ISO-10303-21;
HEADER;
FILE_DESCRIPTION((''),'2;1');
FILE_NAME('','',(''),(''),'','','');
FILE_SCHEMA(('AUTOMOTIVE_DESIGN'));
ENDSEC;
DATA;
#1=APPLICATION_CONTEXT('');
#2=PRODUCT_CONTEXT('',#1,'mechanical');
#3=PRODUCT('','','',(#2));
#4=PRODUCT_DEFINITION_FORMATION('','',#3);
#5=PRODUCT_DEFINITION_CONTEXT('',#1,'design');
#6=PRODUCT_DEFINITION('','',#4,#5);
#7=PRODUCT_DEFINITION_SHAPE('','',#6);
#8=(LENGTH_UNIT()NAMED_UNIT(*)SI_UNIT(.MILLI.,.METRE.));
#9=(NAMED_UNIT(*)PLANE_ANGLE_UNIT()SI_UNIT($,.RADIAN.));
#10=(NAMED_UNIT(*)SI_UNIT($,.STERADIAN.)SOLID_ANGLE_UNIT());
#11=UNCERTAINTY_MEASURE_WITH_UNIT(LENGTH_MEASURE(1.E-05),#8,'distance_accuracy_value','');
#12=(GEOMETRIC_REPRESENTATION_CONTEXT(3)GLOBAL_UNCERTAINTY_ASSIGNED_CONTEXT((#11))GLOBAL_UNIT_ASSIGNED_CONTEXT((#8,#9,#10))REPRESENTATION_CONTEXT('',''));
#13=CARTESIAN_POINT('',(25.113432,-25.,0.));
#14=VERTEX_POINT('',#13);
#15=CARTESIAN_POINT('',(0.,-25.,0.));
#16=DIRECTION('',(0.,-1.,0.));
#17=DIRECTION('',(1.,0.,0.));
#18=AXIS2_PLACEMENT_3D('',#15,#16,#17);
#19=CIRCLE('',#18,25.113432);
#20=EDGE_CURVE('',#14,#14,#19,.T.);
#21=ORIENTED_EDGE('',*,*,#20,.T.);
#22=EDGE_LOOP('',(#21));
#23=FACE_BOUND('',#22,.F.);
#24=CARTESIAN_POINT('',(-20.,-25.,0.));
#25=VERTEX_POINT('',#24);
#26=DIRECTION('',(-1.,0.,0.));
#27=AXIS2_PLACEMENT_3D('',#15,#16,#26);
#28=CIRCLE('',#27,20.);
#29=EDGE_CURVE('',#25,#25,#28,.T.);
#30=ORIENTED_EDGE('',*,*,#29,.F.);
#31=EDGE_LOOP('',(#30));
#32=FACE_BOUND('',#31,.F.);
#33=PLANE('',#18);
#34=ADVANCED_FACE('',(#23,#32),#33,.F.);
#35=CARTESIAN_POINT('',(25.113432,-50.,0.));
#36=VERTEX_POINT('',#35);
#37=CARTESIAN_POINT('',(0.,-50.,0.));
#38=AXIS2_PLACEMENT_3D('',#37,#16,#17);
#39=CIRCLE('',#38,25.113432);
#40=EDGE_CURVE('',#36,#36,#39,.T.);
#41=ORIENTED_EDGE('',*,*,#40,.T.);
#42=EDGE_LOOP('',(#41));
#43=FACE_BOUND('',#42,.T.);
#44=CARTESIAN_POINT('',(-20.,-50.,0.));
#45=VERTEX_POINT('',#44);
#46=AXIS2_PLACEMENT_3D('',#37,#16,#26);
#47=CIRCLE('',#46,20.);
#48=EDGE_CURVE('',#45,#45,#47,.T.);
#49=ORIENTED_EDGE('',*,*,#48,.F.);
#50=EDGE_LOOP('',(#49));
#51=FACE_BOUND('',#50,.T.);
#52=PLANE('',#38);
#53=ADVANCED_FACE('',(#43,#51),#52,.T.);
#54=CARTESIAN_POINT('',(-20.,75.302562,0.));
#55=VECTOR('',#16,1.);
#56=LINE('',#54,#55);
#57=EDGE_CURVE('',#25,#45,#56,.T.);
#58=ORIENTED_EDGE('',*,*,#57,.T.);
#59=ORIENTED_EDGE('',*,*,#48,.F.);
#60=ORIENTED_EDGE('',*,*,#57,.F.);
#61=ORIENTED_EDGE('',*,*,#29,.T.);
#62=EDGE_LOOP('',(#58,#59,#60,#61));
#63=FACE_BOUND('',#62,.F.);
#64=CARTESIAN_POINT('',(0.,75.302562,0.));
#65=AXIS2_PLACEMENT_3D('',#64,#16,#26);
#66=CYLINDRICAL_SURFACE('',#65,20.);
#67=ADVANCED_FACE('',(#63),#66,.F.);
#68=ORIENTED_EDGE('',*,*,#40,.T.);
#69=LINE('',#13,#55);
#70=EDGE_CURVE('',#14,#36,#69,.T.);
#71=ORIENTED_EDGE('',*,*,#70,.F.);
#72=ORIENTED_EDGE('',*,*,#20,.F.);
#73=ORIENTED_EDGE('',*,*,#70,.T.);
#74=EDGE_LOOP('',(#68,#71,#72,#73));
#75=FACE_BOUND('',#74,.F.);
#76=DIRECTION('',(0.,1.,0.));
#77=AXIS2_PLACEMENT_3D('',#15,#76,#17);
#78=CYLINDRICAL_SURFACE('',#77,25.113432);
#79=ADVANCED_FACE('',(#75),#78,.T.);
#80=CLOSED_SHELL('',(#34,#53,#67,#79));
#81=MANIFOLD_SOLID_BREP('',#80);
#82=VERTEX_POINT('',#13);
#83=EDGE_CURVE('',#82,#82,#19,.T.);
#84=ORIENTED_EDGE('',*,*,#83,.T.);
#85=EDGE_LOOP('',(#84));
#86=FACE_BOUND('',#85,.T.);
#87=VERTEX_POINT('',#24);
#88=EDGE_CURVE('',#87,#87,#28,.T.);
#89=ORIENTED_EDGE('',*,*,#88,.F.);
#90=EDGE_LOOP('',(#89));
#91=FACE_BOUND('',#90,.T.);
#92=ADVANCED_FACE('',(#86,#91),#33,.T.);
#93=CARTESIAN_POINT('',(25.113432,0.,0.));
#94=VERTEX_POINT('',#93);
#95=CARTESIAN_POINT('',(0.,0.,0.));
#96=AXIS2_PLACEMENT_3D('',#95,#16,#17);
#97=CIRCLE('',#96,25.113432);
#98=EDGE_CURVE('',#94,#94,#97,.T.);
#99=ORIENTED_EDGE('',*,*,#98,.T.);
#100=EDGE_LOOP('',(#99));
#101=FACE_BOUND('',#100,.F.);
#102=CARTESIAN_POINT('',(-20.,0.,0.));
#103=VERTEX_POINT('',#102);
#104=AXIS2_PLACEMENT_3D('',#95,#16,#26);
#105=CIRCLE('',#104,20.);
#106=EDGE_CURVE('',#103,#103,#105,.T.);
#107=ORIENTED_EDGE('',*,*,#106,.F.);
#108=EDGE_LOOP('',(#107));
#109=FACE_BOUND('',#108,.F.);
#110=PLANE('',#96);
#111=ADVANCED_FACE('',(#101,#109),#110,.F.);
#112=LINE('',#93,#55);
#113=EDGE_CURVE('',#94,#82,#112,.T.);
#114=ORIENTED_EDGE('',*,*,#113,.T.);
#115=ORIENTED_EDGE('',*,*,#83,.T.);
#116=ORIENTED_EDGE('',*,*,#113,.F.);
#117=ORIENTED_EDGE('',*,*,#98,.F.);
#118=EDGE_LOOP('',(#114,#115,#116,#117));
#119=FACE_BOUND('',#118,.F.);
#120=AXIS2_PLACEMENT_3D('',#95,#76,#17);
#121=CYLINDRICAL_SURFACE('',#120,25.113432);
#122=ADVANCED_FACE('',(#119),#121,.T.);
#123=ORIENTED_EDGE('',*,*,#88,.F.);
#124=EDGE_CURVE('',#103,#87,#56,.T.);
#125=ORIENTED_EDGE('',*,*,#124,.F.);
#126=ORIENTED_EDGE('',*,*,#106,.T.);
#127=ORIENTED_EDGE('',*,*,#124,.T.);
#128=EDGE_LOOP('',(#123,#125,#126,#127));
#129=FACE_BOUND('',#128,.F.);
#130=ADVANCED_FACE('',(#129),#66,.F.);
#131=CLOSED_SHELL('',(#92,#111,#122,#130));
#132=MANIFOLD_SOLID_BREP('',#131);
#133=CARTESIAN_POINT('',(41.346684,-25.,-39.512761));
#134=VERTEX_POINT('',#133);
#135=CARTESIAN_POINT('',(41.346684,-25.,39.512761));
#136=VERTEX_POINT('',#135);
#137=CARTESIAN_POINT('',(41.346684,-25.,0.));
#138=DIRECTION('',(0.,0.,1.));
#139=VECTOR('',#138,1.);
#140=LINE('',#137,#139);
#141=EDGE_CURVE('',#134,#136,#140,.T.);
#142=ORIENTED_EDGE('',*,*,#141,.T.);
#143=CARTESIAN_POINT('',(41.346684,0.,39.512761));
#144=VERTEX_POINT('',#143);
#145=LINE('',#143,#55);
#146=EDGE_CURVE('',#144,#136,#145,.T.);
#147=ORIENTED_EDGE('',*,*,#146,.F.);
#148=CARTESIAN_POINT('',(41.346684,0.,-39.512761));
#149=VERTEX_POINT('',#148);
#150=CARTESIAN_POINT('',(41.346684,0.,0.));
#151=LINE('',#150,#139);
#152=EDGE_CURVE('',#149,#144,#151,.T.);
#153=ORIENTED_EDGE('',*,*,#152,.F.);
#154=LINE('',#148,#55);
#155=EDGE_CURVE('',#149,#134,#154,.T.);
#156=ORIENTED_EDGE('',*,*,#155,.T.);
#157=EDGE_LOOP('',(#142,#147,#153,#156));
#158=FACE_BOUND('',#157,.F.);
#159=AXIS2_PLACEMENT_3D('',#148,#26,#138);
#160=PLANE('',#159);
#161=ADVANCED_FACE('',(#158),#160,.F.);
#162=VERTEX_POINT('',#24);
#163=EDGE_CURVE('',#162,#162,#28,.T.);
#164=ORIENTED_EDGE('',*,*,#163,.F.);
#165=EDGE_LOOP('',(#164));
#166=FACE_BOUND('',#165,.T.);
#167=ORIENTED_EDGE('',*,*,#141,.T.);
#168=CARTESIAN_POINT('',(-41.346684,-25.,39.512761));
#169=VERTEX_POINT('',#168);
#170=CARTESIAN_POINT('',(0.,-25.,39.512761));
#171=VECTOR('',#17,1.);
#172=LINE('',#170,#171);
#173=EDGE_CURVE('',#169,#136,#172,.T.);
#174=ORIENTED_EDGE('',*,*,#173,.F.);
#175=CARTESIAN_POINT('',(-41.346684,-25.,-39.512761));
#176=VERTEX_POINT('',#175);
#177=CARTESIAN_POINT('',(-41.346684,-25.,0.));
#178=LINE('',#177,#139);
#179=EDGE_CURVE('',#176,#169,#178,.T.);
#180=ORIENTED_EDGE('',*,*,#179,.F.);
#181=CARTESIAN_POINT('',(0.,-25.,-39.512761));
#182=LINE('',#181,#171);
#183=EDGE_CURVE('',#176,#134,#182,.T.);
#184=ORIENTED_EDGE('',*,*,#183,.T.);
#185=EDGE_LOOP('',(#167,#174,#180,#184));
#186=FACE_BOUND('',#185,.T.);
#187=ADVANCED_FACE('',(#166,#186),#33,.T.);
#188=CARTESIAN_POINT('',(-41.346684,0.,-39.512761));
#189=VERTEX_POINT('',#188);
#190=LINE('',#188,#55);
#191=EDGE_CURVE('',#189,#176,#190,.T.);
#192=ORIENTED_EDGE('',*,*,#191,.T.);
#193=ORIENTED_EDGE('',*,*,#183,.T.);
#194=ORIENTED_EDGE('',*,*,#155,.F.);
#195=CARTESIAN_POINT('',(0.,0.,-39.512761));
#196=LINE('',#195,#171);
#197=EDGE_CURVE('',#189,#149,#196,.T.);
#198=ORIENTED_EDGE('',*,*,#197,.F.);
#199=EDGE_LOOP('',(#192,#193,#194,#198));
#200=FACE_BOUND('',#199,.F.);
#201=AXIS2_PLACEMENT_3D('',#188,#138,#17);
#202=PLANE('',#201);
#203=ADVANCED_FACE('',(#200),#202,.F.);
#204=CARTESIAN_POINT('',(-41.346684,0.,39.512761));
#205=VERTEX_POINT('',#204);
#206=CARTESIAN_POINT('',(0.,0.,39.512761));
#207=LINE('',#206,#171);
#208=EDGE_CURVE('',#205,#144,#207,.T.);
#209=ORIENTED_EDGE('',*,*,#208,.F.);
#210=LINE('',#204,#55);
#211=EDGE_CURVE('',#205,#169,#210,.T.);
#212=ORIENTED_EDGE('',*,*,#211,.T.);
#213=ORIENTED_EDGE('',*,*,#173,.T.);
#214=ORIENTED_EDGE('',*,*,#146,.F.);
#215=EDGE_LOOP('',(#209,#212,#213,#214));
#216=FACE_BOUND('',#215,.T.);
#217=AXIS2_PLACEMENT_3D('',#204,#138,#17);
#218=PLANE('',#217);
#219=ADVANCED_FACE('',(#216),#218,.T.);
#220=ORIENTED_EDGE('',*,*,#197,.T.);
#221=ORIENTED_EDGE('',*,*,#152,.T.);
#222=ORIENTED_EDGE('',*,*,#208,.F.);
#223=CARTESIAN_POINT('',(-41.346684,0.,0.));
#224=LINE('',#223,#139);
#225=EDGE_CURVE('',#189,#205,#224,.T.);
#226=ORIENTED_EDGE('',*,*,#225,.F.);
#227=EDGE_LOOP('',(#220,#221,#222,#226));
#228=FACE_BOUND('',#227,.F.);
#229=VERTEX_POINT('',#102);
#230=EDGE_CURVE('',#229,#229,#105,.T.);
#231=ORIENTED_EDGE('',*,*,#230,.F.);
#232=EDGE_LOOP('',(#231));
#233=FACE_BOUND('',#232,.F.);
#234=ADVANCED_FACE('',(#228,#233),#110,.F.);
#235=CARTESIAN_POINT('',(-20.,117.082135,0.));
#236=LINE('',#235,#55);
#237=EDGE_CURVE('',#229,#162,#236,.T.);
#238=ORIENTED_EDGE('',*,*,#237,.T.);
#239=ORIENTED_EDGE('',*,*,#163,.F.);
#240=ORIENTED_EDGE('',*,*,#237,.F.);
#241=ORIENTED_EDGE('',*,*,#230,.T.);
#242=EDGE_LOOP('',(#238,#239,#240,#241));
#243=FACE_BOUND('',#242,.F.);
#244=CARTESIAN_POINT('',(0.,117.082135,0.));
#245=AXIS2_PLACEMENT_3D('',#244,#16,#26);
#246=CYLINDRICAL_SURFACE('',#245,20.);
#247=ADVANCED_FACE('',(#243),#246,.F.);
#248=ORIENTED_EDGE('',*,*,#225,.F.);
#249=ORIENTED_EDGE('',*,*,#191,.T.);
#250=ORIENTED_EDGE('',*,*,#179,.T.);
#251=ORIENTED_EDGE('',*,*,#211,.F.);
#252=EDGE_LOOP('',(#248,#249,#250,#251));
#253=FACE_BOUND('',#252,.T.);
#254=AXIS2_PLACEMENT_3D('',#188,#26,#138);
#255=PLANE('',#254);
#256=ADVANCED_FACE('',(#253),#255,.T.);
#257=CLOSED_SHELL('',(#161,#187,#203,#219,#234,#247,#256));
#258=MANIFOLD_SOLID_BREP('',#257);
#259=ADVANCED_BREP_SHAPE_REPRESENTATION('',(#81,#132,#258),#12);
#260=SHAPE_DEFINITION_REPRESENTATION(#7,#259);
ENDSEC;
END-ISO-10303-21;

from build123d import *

# Parameters (mm, degrees)
F0_W     = 82.6933681965
F0_H     = 79.0255218744
F2_DEPTH = 25
F1_R     = 25.1134324312
F3_DEPTH = 25
F5_D     = 40
F5_2_D   = 40
F5_3_D   = 40


with BuildPart() as f2:
    # F0 (on Front) → F2 (new body)
    with BuildSketch(Plane.XZ):
        Rectangle(F0_W, F0_H)
    extrude(amount=F2_DEPTH)

    # F5 (through all)
    with Locations(Plane(origin=(0, 0, 0), x_dir=(1, 0, 0), z_dir=(0, 1, 0))):
        with Locations((0, 0)):
            Hole(F5_D / 2)


with BuildPart() as f2b:
    # F1 (on Front) → F2, piece 2 (new body)
    with BuildSketch(Plane.XZ):
        Circle(F1_R)
    extrude(amount=F2_DEPTH)


with BuildPart() as f3:
    # F3 (new): a face of the model
    f3_faces = [f2b.part.faces().sort_by_distance(p)[0] for p in [
        (0, -25, 0),
    ]]
    extrude(f3_faces, amount=F3_DEPTH)

    # F5#3 (through all)
    with Locations(Plane(origin=(0, 0, 0), x_dir=(1, 0, 0), z_dir=(0, 1, 0))):
        with Locations((0, 0)):
            Hole(F5_3_D / 2)


with BuildPart() as f2b_1:
    add(f2b.part)

    # F5#2 (through all)
    with Locations(Plane(origin=(0, 0, 0), x_dir=(1, 0, 0), z_dir=(0, 1, 0))):
        with Locations((0, 0)):
            Hole(F5_2_D / 2)


solid = Compound([f2.part, f3.part, f2b_1.part])
